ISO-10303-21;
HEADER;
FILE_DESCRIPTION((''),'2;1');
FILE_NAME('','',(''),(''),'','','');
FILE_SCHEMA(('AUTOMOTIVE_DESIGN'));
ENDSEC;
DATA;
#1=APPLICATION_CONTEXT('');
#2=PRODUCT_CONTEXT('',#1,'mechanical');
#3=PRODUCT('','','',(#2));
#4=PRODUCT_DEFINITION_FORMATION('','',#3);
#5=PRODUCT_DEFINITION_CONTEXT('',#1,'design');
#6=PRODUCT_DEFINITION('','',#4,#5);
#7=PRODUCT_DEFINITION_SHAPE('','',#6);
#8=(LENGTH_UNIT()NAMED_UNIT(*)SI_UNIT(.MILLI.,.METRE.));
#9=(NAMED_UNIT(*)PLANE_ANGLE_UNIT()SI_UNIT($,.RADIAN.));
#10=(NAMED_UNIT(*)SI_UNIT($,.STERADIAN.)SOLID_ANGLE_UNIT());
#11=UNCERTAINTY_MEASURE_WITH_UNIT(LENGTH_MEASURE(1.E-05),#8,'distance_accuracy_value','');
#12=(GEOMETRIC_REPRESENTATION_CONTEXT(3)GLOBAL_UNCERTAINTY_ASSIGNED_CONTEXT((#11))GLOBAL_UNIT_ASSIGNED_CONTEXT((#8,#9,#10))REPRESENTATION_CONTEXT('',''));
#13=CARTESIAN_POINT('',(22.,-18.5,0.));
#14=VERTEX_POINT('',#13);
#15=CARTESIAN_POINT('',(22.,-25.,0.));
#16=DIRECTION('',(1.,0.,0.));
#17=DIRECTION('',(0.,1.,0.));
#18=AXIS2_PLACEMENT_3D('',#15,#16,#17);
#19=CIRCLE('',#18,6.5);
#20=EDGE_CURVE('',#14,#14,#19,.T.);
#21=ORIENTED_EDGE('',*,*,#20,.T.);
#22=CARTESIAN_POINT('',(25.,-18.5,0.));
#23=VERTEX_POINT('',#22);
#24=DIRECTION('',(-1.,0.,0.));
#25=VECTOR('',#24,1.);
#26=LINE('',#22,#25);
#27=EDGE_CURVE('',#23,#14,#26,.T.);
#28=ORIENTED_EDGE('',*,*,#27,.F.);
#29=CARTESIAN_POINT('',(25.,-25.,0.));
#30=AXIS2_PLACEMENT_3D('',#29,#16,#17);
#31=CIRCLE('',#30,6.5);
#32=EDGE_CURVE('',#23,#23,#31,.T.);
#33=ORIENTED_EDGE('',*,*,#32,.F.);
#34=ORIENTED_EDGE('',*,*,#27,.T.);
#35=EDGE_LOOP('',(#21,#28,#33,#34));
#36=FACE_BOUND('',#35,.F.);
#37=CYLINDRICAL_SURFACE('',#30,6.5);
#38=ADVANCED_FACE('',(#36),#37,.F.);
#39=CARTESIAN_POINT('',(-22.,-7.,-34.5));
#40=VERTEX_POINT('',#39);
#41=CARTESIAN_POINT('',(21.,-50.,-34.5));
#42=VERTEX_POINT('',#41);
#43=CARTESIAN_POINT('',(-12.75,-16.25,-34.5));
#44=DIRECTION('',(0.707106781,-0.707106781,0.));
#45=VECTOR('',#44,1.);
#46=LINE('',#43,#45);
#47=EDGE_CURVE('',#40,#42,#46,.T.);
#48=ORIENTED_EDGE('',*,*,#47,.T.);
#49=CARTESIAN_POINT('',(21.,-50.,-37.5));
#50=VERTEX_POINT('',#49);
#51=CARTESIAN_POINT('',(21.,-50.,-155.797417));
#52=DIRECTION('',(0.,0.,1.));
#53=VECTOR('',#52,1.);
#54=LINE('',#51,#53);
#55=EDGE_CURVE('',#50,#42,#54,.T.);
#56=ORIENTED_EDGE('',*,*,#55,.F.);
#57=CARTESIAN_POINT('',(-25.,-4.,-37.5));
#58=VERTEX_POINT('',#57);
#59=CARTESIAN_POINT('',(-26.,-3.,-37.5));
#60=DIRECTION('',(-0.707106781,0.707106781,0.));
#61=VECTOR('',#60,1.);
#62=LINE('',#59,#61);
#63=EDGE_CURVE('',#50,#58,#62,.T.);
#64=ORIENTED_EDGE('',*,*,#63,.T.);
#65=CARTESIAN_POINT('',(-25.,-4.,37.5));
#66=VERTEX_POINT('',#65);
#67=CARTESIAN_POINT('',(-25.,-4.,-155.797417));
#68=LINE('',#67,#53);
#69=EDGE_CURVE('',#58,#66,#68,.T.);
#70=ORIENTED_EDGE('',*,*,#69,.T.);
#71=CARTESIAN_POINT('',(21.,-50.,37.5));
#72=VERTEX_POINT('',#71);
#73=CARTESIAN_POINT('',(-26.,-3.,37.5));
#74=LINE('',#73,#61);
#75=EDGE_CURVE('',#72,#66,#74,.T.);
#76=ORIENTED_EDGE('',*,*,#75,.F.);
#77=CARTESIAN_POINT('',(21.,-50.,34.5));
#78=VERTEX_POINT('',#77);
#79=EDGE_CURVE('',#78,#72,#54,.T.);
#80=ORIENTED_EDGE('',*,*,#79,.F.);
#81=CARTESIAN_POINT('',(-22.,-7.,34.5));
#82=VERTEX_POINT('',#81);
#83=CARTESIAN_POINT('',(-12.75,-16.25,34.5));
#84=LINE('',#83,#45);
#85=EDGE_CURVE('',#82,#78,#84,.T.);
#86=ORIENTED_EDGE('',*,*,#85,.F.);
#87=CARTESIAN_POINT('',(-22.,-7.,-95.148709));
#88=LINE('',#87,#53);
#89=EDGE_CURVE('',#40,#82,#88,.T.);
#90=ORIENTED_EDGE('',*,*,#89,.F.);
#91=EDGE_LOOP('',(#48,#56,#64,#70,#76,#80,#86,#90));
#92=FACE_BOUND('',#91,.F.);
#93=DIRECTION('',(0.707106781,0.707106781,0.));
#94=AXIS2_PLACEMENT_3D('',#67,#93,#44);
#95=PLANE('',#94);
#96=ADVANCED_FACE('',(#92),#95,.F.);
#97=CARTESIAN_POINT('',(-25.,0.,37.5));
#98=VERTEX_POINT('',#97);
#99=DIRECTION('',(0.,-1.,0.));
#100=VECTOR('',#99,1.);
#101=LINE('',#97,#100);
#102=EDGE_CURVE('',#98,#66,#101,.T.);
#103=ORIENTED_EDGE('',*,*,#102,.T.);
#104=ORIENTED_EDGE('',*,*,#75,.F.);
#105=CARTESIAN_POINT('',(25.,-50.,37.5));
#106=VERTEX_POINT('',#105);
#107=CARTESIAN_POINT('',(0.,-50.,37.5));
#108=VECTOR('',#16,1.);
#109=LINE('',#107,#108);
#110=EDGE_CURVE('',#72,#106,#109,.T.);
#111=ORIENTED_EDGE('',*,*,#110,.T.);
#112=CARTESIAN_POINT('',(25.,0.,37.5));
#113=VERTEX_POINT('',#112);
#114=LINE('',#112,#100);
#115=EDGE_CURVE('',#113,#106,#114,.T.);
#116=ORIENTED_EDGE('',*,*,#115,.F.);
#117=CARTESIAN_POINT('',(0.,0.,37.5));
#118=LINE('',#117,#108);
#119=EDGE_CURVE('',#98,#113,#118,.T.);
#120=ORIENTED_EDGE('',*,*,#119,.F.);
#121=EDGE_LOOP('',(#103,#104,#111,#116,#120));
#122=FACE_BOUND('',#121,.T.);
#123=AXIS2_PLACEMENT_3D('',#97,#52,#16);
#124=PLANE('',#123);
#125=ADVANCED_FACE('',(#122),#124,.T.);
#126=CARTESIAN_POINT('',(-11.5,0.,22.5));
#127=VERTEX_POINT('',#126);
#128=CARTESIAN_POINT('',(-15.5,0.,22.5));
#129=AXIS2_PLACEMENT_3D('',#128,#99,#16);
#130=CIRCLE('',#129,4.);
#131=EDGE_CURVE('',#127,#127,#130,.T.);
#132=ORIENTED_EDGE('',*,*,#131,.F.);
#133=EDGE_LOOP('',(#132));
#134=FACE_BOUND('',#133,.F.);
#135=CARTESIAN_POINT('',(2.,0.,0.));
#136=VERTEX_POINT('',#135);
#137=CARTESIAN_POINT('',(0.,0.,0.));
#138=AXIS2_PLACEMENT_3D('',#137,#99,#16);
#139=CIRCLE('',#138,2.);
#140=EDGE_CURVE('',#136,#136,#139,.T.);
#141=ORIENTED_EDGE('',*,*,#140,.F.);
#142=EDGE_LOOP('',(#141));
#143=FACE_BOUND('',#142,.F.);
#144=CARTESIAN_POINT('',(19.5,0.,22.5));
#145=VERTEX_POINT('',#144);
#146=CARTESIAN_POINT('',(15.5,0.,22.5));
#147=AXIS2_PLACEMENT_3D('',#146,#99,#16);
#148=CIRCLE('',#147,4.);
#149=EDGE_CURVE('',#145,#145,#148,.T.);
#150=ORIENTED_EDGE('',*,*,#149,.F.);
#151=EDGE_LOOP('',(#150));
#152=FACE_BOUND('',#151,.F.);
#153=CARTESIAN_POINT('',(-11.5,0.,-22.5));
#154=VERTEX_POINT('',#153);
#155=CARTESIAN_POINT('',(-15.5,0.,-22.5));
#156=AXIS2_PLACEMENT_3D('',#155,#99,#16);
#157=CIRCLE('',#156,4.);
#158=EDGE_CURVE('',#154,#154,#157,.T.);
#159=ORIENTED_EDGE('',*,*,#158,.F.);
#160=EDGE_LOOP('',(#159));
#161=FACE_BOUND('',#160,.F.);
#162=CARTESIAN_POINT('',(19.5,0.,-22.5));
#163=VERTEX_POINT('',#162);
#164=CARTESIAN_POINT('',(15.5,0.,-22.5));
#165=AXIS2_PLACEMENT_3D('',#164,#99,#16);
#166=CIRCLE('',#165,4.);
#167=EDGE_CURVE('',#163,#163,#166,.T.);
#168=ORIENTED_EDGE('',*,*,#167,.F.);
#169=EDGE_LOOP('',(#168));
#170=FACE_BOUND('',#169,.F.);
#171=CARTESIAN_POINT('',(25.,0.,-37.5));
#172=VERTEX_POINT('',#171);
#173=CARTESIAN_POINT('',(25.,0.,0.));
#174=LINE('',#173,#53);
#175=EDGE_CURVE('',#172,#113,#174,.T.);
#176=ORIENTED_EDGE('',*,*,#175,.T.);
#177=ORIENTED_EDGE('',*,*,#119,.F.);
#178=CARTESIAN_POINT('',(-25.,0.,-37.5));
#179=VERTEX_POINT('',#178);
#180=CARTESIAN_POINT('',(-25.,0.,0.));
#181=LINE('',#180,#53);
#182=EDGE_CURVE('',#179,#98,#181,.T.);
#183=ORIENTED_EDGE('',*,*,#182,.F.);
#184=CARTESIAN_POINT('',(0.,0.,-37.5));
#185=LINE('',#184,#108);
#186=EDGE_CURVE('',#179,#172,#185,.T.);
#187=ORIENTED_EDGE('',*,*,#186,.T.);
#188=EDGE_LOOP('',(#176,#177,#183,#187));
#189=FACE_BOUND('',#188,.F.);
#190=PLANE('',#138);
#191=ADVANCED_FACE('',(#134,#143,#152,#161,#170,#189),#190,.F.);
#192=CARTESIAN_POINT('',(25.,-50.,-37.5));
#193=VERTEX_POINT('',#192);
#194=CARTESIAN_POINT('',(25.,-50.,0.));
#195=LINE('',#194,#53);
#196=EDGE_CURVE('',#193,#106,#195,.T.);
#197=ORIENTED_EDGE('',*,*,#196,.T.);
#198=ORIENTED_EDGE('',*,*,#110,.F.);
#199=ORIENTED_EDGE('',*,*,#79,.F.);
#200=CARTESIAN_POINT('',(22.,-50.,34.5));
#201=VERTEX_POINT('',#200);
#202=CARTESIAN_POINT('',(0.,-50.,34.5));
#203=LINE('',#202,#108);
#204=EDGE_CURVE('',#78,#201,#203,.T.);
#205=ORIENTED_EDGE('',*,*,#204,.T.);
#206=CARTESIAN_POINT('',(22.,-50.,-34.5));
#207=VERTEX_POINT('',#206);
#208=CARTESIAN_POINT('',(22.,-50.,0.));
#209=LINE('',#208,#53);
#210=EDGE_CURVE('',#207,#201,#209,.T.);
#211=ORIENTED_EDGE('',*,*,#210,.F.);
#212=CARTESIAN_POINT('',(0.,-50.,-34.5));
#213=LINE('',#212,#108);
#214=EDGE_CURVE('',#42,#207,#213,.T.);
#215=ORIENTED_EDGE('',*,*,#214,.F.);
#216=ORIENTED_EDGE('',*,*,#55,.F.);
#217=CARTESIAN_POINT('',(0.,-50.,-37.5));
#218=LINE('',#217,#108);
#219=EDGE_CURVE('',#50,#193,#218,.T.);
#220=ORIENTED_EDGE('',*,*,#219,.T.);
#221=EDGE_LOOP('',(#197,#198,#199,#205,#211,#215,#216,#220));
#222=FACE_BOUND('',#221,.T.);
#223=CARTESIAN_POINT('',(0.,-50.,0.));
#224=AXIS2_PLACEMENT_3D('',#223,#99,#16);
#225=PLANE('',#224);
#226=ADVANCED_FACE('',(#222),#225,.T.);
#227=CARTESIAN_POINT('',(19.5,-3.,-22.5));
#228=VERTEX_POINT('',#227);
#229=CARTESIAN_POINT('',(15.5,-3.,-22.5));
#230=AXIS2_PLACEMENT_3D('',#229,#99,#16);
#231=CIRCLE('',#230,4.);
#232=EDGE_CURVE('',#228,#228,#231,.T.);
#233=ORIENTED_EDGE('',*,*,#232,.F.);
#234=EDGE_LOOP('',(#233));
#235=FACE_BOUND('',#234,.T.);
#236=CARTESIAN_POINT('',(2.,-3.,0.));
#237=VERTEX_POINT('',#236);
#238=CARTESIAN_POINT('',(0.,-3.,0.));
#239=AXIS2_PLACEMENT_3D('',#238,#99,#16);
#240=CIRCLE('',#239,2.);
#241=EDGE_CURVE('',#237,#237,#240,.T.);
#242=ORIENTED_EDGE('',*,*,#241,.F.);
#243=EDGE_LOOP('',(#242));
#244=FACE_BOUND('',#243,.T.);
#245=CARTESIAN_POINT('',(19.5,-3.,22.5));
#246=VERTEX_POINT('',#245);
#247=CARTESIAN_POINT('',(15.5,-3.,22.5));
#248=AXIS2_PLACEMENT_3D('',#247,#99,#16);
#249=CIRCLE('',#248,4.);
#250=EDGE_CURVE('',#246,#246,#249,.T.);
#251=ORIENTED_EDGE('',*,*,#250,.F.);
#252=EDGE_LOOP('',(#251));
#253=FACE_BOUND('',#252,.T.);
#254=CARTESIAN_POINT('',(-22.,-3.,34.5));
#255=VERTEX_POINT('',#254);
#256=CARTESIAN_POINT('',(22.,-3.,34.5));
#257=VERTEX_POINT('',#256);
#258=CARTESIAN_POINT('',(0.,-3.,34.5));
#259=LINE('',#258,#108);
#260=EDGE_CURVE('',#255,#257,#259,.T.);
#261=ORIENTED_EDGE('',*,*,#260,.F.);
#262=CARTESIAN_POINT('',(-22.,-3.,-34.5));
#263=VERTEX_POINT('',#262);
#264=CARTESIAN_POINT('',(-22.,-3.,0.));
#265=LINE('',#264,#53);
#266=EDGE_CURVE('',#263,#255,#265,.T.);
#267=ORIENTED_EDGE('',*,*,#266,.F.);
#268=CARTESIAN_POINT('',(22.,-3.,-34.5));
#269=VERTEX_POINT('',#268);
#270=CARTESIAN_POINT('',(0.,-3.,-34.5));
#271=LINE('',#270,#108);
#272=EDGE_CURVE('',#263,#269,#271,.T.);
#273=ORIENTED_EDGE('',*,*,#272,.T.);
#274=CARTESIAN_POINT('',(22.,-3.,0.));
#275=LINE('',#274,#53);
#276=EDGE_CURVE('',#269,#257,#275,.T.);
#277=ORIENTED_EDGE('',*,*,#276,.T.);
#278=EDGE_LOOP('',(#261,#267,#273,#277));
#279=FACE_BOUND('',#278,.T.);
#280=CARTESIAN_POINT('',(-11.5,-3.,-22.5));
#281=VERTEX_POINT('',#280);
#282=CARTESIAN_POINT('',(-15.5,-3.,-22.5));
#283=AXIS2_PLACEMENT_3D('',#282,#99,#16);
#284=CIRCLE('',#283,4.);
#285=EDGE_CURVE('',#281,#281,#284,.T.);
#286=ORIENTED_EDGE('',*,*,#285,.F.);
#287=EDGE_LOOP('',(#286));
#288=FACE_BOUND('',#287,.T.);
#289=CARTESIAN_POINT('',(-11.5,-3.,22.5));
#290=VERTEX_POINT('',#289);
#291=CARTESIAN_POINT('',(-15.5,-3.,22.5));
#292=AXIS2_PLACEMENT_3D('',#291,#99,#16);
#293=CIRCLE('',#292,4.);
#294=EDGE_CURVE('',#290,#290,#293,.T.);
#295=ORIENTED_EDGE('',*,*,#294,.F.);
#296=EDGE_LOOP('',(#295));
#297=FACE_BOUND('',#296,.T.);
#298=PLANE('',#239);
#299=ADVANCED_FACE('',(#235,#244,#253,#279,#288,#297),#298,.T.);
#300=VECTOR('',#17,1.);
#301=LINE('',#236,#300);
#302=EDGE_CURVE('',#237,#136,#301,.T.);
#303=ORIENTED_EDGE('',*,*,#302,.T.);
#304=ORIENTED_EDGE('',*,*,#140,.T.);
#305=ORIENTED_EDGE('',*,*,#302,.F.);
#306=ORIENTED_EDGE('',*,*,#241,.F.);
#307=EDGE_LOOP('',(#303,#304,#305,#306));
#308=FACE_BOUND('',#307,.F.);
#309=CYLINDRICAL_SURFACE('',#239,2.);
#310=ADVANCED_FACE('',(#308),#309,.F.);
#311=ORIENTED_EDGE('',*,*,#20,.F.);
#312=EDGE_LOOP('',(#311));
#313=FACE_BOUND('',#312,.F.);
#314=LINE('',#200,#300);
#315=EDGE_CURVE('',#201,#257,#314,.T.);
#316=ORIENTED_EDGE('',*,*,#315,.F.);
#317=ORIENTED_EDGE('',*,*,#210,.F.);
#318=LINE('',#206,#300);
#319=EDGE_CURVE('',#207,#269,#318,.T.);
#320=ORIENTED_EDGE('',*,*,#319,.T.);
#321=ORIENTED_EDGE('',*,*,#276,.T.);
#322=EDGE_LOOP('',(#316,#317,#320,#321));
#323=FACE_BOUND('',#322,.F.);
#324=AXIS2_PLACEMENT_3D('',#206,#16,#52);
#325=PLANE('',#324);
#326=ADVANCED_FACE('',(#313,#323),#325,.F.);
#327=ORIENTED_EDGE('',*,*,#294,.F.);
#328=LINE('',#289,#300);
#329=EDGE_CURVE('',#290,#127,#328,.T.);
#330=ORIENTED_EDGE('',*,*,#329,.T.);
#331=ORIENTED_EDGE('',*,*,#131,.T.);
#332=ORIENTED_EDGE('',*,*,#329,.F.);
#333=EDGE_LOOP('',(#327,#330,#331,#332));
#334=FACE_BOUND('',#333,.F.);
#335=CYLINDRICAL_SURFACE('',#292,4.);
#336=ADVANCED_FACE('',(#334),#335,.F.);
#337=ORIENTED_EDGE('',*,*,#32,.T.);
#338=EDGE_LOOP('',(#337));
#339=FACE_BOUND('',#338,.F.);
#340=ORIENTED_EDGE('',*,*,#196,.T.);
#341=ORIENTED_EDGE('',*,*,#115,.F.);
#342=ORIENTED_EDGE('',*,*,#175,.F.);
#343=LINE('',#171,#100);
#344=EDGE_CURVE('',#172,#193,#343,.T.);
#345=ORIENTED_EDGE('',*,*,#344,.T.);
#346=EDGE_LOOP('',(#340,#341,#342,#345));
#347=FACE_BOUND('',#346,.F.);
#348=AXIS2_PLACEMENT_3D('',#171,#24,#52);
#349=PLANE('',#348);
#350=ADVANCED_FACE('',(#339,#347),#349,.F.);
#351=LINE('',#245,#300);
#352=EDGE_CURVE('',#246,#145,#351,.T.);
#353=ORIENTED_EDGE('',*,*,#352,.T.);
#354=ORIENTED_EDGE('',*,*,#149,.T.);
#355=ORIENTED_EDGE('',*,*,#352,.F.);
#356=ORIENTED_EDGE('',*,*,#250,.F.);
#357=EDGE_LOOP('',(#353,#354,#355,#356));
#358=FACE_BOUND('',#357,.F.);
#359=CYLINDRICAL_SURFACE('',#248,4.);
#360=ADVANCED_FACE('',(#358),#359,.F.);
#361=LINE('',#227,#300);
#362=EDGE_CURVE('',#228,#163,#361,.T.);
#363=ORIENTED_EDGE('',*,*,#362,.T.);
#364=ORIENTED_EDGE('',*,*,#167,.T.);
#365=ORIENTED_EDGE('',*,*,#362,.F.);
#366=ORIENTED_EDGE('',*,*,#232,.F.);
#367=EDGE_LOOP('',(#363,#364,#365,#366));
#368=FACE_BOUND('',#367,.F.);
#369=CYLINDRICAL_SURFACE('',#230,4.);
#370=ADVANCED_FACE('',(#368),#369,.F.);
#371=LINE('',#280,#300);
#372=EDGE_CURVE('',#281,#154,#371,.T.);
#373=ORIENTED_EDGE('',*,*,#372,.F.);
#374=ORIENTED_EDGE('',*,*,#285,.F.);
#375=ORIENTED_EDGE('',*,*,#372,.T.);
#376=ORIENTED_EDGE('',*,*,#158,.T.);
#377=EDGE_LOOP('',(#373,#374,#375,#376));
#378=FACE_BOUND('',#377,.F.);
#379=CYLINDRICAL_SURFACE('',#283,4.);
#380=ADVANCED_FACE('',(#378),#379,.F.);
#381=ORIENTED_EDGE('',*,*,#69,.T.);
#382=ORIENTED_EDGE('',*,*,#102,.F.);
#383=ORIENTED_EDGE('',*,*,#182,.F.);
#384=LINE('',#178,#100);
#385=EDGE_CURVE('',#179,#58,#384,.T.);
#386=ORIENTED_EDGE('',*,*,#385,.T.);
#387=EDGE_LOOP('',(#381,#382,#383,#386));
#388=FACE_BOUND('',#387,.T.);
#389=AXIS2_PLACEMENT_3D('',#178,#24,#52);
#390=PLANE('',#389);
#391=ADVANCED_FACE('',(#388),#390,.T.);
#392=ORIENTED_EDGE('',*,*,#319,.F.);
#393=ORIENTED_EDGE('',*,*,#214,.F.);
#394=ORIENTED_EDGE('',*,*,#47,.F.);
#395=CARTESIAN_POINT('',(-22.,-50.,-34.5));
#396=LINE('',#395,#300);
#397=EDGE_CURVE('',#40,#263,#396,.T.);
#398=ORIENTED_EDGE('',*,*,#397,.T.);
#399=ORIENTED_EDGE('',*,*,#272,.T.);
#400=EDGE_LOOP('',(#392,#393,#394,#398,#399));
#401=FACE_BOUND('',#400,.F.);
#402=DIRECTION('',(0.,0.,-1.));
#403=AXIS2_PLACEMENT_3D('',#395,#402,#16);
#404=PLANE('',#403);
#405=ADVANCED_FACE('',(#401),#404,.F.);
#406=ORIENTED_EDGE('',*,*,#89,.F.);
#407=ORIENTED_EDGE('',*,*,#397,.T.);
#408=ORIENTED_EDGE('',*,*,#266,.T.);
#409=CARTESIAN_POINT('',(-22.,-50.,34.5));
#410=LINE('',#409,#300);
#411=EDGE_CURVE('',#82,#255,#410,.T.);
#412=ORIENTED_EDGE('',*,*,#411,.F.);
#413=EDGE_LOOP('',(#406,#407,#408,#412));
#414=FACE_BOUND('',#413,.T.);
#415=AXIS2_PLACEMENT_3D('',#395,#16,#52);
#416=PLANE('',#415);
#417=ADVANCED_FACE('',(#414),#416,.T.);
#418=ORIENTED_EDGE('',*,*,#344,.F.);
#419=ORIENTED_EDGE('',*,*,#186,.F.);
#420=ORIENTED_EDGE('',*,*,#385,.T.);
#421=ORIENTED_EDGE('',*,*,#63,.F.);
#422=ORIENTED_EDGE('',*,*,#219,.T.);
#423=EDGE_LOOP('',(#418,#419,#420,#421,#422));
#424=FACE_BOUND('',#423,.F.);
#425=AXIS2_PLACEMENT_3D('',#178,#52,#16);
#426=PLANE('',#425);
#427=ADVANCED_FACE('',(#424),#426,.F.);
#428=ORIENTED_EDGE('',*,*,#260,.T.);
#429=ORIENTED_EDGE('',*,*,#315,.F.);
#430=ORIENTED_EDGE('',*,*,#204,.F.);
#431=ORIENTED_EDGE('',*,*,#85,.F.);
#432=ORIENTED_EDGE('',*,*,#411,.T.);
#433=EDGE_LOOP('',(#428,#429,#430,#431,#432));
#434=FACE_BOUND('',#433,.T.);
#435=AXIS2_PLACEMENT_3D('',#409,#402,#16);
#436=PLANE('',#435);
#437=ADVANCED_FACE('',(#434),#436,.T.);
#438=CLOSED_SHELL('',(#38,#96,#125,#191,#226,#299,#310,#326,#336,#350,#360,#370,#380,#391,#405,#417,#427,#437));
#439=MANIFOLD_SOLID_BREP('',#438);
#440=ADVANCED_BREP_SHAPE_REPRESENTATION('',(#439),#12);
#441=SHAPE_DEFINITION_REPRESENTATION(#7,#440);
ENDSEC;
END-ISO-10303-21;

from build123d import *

# Parameters (mm, degrees)
F0_W        = 50
F0_H        = 75
F1_DEPTH    = 50
F2_W        = 44
F2_H        = 69
F3_DEPTH    = 47
F4_T1_DEPTH = 311.5948348929
F5_R        = 4
F5_R_2      = 2
F6_DEPTH    = 3
F7_R        = 6.5
F8_DEPTH    = 3


# Not quite as in the source:
# - a fillet or chamfer that OpenCascade refuses, or shapes differently, is made with other operations: its cross-section is extruded or revolved along the edge and cut away or added


with BuildPart() as f1:
    # F0 (on Front) → F1 (new body)
    with BuildSketch(Plane.XZ):
        Rectangle(F0_W, F0_H)
    extrude(amount=F1_DEPTH)

    # F2 (on face) → F3 (cut)
    with BuildSketch(Plane.XZ.offset(50)):
        Rectangle(F2_W, F2_H)
    extrude(amount=-F3_DEPTH, mode=Mode.SUBTRACT)

    # F4: chamfer of 46 on 1 edges, made by hand

    # F4_s2 → F4_t1 (cut)
    with BuildSketch(Plane.XY.offset(-155.7974174464)):
        Polygon((-25, -4), (21, -50), (-25, -50), align=None)
    extrude(amount=F4_T1_DEPTH, mode=Mode.SUBTRACT)

    # F5 (on face) → F6 (cut, through all)
    with BuildSketch(Plane.XZ.offset(3)):
        with Locations((-15.5, 22.5)):
            Circle(F5_R)
        with Locations((15.5, 22.5)):
            Circle(F5_R)
        with Locations((15.5, -22.5)):
            Circle(F5_R)
        with Locations((-15.5, -22.5)):
            Circle(F5_R)
        Circle(F5_R_2)
    extrude(amount=-F6_DEPTH, mode=Mode.SUBTRACT)

    # F7 (on face) → F8 (cut, through all)
    with BuildSketch(Plane.YZ.offset(25)):
        with Locations((-25, 0)):
            Circle(F7_R)
    extrude(amount=-F8_DEPTH, mode=Mode.SUBTRACT)


solid = f1.part
